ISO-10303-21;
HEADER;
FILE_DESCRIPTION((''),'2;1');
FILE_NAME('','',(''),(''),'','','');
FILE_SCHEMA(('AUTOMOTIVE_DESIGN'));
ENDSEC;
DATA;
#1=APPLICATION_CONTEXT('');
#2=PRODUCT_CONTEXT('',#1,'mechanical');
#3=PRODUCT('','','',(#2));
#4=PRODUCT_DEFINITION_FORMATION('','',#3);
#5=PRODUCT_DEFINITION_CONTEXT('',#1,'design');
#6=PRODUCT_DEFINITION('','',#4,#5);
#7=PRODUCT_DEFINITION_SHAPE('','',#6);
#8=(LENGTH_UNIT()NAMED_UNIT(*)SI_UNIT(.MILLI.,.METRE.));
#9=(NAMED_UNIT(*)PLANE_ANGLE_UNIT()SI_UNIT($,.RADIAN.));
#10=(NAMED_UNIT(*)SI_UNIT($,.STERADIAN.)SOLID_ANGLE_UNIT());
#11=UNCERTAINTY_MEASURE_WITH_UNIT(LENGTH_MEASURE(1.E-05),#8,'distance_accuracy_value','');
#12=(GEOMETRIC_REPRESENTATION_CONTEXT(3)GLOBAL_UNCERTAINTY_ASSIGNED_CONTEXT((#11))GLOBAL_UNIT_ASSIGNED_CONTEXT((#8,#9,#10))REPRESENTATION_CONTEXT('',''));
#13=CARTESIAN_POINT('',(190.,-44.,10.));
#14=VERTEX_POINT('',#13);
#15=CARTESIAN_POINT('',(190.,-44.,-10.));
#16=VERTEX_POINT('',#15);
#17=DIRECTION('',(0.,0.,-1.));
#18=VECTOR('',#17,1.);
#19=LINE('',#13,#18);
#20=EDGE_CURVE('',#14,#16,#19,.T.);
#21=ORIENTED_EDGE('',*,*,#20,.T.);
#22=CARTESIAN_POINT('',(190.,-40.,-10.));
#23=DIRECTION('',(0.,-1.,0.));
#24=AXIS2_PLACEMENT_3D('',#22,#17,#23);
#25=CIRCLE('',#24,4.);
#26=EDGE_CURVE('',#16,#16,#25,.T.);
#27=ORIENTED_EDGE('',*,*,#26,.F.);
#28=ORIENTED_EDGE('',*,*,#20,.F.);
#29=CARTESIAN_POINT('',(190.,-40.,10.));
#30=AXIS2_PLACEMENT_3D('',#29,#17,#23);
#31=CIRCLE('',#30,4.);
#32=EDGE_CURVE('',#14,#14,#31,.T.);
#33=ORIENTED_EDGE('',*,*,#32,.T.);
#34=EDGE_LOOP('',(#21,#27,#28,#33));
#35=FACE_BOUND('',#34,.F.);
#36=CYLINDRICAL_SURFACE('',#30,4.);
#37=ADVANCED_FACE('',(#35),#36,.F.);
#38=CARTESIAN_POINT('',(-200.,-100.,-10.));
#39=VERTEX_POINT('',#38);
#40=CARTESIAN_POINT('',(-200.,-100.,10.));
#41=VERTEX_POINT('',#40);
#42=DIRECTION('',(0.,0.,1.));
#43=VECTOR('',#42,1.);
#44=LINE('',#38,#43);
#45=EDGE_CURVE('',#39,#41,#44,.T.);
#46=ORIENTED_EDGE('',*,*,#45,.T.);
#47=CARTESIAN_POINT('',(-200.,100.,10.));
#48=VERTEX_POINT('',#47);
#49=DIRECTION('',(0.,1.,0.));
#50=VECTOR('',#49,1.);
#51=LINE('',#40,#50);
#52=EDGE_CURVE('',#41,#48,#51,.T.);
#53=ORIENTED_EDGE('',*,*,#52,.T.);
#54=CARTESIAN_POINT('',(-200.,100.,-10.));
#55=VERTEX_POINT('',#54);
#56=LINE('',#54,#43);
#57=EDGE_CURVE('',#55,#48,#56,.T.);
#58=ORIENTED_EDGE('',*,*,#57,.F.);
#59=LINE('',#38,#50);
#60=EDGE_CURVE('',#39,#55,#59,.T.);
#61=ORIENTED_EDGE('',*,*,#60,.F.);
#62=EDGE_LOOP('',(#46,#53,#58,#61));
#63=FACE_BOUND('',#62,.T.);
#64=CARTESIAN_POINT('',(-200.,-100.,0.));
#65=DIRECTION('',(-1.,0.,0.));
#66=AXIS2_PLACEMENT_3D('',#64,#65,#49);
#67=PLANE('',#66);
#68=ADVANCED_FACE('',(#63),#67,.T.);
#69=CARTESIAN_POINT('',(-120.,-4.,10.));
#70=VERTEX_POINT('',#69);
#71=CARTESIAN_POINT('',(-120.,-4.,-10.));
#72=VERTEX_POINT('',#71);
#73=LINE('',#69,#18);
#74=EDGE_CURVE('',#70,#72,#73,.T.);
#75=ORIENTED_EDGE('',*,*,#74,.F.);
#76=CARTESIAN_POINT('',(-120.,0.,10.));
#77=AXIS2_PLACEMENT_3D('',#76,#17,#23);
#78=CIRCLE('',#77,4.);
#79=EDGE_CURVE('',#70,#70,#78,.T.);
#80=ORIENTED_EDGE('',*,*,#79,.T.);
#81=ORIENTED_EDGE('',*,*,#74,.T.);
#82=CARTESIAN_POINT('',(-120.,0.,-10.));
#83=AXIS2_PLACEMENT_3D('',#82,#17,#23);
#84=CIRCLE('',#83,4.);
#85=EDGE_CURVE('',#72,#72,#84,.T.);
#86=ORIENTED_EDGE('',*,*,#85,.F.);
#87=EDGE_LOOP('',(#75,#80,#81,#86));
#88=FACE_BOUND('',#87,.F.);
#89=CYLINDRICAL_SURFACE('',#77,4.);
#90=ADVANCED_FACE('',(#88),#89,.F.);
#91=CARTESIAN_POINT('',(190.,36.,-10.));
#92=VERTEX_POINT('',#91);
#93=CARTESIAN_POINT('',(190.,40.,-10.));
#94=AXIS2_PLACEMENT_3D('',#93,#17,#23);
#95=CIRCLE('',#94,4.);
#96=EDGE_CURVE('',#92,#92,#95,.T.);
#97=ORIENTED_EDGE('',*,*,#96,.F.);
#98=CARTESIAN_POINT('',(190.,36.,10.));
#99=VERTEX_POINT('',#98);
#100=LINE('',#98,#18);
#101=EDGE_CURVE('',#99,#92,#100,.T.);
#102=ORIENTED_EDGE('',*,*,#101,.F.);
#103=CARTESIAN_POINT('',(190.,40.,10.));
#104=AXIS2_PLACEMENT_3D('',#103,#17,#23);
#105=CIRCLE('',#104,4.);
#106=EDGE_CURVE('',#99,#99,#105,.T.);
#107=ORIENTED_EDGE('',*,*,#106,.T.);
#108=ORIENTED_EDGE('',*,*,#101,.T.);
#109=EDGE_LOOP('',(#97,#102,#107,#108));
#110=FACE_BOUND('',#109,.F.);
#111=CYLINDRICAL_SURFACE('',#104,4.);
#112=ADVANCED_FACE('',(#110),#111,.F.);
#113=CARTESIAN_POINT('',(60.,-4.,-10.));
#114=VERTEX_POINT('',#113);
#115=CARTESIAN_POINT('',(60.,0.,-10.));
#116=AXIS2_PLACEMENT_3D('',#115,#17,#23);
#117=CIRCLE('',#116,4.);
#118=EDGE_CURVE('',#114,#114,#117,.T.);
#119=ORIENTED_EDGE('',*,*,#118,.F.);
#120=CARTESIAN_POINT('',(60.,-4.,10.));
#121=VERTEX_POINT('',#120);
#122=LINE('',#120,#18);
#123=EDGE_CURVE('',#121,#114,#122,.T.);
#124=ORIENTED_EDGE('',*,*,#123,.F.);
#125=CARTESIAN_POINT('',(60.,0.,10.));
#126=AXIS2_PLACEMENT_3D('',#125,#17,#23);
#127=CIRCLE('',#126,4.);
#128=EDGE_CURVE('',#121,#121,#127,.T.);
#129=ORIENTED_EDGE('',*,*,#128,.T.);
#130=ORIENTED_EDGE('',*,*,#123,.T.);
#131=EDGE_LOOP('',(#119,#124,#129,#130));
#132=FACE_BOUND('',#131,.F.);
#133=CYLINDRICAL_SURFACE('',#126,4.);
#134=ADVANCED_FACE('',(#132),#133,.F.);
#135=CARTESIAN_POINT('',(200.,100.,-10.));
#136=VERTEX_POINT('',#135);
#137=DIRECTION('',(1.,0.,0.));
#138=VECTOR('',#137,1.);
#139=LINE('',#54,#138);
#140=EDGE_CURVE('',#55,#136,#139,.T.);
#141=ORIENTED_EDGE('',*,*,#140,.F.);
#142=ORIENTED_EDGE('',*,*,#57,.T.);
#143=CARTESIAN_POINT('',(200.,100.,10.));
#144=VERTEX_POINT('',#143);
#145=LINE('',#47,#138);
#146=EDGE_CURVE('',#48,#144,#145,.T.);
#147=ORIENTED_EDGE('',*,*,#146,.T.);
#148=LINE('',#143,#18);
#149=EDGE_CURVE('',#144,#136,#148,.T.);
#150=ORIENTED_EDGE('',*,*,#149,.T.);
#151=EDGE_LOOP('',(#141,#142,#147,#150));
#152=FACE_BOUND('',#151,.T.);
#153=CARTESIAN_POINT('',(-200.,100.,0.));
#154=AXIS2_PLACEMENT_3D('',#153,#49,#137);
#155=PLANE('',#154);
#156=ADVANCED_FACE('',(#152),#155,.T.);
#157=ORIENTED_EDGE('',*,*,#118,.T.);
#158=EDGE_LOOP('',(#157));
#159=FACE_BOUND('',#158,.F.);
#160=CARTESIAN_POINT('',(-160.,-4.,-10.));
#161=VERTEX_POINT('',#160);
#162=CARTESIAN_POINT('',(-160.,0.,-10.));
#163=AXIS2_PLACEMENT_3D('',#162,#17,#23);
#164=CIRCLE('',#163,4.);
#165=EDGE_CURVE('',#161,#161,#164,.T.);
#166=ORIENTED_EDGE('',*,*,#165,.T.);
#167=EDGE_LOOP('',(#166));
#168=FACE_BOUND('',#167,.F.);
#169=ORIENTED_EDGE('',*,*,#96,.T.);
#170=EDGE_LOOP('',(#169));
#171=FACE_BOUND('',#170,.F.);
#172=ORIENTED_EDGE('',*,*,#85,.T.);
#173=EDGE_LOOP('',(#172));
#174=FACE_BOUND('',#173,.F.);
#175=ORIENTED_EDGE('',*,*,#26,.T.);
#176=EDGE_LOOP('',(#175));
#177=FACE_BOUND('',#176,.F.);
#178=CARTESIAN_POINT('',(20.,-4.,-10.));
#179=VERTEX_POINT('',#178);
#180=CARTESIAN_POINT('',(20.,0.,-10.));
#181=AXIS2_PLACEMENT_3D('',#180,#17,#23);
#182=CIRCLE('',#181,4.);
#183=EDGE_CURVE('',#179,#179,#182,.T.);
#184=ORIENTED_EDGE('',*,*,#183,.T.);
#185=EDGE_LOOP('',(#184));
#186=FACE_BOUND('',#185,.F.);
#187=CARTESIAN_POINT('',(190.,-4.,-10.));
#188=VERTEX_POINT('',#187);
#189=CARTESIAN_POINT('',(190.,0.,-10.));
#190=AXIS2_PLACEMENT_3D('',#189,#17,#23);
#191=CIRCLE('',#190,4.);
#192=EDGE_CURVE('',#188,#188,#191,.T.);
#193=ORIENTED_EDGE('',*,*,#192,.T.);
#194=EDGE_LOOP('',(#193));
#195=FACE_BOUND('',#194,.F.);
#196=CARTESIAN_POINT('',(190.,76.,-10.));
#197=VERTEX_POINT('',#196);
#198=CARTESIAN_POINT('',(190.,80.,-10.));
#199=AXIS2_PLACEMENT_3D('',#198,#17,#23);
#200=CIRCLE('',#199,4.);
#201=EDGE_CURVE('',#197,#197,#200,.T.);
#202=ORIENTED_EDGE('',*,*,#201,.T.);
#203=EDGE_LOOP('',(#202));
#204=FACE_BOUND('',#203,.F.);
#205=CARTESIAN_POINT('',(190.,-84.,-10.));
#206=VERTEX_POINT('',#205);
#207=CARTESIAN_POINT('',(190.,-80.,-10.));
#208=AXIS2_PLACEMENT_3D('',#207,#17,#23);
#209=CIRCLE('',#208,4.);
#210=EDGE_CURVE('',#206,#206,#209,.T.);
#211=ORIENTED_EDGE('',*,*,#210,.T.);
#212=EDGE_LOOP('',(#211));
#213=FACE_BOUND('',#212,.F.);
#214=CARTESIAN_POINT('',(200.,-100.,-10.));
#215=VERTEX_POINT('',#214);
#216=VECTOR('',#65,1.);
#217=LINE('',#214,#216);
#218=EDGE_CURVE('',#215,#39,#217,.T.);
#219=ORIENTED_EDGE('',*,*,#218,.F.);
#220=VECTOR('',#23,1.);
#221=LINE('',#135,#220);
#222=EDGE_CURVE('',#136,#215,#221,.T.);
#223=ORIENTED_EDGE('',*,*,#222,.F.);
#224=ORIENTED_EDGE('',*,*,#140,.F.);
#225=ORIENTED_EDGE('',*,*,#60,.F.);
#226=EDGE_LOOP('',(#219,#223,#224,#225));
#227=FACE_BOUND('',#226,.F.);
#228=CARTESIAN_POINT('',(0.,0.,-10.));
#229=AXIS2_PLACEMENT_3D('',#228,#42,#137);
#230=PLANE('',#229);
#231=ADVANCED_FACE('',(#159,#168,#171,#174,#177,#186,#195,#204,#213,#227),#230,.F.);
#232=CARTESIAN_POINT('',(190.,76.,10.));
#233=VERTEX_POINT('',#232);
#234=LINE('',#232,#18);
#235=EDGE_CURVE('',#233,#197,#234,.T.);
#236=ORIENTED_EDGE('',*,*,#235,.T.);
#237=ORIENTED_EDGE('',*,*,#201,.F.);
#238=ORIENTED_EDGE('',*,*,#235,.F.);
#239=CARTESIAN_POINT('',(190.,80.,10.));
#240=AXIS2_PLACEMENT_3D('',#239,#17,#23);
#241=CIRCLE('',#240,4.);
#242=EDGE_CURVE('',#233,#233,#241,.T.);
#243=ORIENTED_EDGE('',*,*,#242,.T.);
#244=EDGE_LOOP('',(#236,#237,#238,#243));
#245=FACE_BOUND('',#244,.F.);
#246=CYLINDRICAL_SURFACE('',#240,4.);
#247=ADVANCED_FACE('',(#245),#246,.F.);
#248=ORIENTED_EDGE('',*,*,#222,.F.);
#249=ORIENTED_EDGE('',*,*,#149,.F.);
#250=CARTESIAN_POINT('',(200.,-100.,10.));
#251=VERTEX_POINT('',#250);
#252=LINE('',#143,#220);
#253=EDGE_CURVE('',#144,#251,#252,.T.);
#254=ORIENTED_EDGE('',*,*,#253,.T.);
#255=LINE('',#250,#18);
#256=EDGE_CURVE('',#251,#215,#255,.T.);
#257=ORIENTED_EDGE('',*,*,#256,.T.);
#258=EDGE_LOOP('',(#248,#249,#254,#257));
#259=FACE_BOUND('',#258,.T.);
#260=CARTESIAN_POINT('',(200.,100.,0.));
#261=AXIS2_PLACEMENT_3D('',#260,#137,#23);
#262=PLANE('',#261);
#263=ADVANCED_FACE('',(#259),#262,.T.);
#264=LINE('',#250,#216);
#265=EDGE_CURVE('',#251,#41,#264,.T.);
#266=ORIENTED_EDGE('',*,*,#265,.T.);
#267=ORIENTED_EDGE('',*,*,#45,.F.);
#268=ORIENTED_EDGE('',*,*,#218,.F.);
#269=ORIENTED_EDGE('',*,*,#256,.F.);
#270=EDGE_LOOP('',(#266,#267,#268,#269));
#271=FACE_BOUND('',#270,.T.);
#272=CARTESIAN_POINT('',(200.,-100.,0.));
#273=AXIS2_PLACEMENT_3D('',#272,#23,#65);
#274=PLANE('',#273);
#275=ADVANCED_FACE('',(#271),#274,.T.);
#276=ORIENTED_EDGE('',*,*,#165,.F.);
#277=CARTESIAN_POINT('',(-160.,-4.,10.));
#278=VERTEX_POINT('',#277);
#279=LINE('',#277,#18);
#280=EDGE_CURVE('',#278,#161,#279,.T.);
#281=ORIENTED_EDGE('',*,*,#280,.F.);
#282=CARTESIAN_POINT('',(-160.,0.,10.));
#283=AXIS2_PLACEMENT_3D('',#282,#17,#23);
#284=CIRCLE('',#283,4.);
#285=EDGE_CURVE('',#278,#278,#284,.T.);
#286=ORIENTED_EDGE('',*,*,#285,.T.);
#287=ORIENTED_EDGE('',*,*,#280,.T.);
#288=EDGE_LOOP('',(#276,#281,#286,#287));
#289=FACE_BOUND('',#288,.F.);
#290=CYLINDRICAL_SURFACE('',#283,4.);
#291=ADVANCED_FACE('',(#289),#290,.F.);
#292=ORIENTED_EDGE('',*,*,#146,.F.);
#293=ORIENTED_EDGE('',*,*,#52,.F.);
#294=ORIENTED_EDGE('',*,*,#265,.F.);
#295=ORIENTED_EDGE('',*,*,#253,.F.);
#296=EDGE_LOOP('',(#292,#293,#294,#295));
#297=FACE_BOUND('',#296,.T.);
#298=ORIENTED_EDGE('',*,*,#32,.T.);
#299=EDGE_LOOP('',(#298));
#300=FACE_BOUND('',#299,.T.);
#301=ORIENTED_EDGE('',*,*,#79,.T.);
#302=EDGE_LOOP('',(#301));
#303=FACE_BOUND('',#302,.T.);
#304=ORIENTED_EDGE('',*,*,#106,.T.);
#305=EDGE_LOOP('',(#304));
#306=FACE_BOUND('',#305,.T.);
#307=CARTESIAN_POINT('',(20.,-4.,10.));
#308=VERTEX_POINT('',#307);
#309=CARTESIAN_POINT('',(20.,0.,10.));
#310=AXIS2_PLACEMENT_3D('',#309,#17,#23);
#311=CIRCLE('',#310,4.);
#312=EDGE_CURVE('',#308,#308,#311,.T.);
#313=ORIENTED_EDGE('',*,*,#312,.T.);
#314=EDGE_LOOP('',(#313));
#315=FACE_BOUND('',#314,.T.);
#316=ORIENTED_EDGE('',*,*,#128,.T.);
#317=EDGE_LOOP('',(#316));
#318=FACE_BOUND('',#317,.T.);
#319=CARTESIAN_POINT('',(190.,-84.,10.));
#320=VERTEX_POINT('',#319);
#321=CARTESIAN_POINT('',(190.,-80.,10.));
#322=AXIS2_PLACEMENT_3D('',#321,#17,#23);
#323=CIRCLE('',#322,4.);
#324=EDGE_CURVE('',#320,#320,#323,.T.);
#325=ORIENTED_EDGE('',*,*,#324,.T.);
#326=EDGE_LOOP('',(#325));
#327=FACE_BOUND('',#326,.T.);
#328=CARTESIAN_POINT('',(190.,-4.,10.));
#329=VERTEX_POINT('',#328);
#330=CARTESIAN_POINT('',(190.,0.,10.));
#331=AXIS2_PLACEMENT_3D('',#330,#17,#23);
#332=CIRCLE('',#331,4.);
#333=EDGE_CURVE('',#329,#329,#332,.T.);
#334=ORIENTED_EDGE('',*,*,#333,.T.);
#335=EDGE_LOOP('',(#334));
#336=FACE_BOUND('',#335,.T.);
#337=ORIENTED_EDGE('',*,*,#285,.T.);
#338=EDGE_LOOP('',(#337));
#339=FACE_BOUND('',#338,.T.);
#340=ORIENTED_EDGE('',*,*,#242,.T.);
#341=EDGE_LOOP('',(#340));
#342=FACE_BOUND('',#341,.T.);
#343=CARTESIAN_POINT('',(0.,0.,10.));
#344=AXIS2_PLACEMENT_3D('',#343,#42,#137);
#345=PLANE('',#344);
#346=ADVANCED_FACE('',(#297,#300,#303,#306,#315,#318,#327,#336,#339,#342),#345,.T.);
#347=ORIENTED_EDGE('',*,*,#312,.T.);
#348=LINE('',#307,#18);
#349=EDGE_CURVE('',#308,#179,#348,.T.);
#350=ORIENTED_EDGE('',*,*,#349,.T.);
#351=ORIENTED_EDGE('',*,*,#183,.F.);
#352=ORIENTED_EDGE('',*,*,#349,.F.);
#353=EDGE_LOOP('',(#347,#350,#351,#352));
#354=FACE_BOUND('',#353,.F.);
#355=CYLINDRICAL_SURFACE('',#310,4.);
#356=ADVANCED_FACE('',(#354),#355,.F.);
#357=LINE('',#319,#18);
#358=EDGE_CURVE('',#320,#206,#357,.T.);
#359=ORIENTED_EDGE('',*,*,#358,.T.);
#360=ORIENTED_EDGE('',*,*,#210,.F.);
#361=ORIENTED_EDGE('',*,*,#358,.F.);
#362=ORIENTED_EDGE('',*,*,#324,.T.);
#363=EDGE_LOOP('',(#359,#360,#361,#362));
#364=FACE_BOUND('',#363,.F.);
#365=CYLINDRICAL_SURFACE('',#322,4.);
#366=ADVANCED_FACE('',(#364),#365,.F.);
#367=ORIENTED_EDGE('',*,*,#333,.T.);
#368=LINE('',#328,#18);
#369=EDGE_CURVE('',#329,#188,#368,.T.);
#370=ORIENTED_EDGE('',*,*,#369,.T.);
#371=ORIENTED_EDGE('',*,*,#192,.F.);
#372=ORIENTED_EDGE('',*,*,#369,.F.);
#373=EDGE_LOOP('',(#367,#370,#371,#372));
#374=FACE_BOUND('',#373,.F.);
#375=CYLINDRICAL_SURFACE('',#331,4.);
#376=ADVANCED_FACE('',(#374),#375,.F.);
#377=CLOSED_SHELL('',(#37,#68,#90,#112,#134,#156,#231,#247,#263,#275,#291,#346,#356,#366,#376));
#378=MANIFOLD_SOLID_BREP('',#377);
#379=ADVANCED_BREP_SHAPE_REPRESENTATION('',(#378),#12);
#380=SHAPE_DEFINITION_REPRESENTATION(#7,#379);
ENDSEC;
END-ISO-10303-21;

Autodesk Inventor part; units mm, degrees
ref_plane "YZ Plane" through (0, 0, 0) normal (1, 0, 0) x (0, 1, 0)
ref_plane "XZ Plane" through (0, 0, 0) normal (0, 1, 0) x (-1, 0, 0)
ref_plane "XY Plane" through (0, 0, 0) normal (0, 0, 1) x (1, 0, 0)
sketch "Sketch1" plane through (0, 0, 0) normal (0, 0, 1) x (1, 0, 0)
  line L0 (-200, 100) -> (200, 100)
  line L1 (200, 100) -> (200, -100)
  line L2 (200, -100) -> (-200, -100)
  line L3 (-200, -100) -> (-200, 100)
  point P0 (0, 0)
  point P1 (0, 100)
  point P2 (-200, 0)
  dimension "d0" = 400
  dimension "d1" = 200
extrude "Extrusion1" add sketch "Sketch1" along normal mid plane 20
sketch "Sketch10" plane through (0, 0, 10) normal (0, 0, 1) x (1, 0, 0)
  line L0 (-200, 100) -> (-200, -100) projected
  point P0 (0, 0)
  point P1 (-160, 0)
  dimension "d53" = 40
hole "Hole1" at (-160, 0, 10) direction (0, 0, -1) diameter 8 end through all
pattern_linear "Rectangular Pattern1" count 2 spacing 40 along (1, 0, 0) count 2 spacing 180 along (1, 0, 0) of "Hole1"
sketch "Sketch11" plane through (0, 0, 10) normal (0, 0, 1) x (1, 0, 0)
  line L0 (200, -100) -> (200, 100) projected
  point P0 (0, 0)
  point P1 (190, 0)
  point P2 (200, 0)
  dimension "d57" = 10
hole "Hole2" at (190, 0, 10) direction (0, 0, -1) diameter 8 end through all
pattern_linear "Rectangular Pattern2" count 5 spacing 40 along (0, 1, 0) of "Hole2" first direction both ways yes
properties part number "0005-10-024" material "Wood (Maple)"
